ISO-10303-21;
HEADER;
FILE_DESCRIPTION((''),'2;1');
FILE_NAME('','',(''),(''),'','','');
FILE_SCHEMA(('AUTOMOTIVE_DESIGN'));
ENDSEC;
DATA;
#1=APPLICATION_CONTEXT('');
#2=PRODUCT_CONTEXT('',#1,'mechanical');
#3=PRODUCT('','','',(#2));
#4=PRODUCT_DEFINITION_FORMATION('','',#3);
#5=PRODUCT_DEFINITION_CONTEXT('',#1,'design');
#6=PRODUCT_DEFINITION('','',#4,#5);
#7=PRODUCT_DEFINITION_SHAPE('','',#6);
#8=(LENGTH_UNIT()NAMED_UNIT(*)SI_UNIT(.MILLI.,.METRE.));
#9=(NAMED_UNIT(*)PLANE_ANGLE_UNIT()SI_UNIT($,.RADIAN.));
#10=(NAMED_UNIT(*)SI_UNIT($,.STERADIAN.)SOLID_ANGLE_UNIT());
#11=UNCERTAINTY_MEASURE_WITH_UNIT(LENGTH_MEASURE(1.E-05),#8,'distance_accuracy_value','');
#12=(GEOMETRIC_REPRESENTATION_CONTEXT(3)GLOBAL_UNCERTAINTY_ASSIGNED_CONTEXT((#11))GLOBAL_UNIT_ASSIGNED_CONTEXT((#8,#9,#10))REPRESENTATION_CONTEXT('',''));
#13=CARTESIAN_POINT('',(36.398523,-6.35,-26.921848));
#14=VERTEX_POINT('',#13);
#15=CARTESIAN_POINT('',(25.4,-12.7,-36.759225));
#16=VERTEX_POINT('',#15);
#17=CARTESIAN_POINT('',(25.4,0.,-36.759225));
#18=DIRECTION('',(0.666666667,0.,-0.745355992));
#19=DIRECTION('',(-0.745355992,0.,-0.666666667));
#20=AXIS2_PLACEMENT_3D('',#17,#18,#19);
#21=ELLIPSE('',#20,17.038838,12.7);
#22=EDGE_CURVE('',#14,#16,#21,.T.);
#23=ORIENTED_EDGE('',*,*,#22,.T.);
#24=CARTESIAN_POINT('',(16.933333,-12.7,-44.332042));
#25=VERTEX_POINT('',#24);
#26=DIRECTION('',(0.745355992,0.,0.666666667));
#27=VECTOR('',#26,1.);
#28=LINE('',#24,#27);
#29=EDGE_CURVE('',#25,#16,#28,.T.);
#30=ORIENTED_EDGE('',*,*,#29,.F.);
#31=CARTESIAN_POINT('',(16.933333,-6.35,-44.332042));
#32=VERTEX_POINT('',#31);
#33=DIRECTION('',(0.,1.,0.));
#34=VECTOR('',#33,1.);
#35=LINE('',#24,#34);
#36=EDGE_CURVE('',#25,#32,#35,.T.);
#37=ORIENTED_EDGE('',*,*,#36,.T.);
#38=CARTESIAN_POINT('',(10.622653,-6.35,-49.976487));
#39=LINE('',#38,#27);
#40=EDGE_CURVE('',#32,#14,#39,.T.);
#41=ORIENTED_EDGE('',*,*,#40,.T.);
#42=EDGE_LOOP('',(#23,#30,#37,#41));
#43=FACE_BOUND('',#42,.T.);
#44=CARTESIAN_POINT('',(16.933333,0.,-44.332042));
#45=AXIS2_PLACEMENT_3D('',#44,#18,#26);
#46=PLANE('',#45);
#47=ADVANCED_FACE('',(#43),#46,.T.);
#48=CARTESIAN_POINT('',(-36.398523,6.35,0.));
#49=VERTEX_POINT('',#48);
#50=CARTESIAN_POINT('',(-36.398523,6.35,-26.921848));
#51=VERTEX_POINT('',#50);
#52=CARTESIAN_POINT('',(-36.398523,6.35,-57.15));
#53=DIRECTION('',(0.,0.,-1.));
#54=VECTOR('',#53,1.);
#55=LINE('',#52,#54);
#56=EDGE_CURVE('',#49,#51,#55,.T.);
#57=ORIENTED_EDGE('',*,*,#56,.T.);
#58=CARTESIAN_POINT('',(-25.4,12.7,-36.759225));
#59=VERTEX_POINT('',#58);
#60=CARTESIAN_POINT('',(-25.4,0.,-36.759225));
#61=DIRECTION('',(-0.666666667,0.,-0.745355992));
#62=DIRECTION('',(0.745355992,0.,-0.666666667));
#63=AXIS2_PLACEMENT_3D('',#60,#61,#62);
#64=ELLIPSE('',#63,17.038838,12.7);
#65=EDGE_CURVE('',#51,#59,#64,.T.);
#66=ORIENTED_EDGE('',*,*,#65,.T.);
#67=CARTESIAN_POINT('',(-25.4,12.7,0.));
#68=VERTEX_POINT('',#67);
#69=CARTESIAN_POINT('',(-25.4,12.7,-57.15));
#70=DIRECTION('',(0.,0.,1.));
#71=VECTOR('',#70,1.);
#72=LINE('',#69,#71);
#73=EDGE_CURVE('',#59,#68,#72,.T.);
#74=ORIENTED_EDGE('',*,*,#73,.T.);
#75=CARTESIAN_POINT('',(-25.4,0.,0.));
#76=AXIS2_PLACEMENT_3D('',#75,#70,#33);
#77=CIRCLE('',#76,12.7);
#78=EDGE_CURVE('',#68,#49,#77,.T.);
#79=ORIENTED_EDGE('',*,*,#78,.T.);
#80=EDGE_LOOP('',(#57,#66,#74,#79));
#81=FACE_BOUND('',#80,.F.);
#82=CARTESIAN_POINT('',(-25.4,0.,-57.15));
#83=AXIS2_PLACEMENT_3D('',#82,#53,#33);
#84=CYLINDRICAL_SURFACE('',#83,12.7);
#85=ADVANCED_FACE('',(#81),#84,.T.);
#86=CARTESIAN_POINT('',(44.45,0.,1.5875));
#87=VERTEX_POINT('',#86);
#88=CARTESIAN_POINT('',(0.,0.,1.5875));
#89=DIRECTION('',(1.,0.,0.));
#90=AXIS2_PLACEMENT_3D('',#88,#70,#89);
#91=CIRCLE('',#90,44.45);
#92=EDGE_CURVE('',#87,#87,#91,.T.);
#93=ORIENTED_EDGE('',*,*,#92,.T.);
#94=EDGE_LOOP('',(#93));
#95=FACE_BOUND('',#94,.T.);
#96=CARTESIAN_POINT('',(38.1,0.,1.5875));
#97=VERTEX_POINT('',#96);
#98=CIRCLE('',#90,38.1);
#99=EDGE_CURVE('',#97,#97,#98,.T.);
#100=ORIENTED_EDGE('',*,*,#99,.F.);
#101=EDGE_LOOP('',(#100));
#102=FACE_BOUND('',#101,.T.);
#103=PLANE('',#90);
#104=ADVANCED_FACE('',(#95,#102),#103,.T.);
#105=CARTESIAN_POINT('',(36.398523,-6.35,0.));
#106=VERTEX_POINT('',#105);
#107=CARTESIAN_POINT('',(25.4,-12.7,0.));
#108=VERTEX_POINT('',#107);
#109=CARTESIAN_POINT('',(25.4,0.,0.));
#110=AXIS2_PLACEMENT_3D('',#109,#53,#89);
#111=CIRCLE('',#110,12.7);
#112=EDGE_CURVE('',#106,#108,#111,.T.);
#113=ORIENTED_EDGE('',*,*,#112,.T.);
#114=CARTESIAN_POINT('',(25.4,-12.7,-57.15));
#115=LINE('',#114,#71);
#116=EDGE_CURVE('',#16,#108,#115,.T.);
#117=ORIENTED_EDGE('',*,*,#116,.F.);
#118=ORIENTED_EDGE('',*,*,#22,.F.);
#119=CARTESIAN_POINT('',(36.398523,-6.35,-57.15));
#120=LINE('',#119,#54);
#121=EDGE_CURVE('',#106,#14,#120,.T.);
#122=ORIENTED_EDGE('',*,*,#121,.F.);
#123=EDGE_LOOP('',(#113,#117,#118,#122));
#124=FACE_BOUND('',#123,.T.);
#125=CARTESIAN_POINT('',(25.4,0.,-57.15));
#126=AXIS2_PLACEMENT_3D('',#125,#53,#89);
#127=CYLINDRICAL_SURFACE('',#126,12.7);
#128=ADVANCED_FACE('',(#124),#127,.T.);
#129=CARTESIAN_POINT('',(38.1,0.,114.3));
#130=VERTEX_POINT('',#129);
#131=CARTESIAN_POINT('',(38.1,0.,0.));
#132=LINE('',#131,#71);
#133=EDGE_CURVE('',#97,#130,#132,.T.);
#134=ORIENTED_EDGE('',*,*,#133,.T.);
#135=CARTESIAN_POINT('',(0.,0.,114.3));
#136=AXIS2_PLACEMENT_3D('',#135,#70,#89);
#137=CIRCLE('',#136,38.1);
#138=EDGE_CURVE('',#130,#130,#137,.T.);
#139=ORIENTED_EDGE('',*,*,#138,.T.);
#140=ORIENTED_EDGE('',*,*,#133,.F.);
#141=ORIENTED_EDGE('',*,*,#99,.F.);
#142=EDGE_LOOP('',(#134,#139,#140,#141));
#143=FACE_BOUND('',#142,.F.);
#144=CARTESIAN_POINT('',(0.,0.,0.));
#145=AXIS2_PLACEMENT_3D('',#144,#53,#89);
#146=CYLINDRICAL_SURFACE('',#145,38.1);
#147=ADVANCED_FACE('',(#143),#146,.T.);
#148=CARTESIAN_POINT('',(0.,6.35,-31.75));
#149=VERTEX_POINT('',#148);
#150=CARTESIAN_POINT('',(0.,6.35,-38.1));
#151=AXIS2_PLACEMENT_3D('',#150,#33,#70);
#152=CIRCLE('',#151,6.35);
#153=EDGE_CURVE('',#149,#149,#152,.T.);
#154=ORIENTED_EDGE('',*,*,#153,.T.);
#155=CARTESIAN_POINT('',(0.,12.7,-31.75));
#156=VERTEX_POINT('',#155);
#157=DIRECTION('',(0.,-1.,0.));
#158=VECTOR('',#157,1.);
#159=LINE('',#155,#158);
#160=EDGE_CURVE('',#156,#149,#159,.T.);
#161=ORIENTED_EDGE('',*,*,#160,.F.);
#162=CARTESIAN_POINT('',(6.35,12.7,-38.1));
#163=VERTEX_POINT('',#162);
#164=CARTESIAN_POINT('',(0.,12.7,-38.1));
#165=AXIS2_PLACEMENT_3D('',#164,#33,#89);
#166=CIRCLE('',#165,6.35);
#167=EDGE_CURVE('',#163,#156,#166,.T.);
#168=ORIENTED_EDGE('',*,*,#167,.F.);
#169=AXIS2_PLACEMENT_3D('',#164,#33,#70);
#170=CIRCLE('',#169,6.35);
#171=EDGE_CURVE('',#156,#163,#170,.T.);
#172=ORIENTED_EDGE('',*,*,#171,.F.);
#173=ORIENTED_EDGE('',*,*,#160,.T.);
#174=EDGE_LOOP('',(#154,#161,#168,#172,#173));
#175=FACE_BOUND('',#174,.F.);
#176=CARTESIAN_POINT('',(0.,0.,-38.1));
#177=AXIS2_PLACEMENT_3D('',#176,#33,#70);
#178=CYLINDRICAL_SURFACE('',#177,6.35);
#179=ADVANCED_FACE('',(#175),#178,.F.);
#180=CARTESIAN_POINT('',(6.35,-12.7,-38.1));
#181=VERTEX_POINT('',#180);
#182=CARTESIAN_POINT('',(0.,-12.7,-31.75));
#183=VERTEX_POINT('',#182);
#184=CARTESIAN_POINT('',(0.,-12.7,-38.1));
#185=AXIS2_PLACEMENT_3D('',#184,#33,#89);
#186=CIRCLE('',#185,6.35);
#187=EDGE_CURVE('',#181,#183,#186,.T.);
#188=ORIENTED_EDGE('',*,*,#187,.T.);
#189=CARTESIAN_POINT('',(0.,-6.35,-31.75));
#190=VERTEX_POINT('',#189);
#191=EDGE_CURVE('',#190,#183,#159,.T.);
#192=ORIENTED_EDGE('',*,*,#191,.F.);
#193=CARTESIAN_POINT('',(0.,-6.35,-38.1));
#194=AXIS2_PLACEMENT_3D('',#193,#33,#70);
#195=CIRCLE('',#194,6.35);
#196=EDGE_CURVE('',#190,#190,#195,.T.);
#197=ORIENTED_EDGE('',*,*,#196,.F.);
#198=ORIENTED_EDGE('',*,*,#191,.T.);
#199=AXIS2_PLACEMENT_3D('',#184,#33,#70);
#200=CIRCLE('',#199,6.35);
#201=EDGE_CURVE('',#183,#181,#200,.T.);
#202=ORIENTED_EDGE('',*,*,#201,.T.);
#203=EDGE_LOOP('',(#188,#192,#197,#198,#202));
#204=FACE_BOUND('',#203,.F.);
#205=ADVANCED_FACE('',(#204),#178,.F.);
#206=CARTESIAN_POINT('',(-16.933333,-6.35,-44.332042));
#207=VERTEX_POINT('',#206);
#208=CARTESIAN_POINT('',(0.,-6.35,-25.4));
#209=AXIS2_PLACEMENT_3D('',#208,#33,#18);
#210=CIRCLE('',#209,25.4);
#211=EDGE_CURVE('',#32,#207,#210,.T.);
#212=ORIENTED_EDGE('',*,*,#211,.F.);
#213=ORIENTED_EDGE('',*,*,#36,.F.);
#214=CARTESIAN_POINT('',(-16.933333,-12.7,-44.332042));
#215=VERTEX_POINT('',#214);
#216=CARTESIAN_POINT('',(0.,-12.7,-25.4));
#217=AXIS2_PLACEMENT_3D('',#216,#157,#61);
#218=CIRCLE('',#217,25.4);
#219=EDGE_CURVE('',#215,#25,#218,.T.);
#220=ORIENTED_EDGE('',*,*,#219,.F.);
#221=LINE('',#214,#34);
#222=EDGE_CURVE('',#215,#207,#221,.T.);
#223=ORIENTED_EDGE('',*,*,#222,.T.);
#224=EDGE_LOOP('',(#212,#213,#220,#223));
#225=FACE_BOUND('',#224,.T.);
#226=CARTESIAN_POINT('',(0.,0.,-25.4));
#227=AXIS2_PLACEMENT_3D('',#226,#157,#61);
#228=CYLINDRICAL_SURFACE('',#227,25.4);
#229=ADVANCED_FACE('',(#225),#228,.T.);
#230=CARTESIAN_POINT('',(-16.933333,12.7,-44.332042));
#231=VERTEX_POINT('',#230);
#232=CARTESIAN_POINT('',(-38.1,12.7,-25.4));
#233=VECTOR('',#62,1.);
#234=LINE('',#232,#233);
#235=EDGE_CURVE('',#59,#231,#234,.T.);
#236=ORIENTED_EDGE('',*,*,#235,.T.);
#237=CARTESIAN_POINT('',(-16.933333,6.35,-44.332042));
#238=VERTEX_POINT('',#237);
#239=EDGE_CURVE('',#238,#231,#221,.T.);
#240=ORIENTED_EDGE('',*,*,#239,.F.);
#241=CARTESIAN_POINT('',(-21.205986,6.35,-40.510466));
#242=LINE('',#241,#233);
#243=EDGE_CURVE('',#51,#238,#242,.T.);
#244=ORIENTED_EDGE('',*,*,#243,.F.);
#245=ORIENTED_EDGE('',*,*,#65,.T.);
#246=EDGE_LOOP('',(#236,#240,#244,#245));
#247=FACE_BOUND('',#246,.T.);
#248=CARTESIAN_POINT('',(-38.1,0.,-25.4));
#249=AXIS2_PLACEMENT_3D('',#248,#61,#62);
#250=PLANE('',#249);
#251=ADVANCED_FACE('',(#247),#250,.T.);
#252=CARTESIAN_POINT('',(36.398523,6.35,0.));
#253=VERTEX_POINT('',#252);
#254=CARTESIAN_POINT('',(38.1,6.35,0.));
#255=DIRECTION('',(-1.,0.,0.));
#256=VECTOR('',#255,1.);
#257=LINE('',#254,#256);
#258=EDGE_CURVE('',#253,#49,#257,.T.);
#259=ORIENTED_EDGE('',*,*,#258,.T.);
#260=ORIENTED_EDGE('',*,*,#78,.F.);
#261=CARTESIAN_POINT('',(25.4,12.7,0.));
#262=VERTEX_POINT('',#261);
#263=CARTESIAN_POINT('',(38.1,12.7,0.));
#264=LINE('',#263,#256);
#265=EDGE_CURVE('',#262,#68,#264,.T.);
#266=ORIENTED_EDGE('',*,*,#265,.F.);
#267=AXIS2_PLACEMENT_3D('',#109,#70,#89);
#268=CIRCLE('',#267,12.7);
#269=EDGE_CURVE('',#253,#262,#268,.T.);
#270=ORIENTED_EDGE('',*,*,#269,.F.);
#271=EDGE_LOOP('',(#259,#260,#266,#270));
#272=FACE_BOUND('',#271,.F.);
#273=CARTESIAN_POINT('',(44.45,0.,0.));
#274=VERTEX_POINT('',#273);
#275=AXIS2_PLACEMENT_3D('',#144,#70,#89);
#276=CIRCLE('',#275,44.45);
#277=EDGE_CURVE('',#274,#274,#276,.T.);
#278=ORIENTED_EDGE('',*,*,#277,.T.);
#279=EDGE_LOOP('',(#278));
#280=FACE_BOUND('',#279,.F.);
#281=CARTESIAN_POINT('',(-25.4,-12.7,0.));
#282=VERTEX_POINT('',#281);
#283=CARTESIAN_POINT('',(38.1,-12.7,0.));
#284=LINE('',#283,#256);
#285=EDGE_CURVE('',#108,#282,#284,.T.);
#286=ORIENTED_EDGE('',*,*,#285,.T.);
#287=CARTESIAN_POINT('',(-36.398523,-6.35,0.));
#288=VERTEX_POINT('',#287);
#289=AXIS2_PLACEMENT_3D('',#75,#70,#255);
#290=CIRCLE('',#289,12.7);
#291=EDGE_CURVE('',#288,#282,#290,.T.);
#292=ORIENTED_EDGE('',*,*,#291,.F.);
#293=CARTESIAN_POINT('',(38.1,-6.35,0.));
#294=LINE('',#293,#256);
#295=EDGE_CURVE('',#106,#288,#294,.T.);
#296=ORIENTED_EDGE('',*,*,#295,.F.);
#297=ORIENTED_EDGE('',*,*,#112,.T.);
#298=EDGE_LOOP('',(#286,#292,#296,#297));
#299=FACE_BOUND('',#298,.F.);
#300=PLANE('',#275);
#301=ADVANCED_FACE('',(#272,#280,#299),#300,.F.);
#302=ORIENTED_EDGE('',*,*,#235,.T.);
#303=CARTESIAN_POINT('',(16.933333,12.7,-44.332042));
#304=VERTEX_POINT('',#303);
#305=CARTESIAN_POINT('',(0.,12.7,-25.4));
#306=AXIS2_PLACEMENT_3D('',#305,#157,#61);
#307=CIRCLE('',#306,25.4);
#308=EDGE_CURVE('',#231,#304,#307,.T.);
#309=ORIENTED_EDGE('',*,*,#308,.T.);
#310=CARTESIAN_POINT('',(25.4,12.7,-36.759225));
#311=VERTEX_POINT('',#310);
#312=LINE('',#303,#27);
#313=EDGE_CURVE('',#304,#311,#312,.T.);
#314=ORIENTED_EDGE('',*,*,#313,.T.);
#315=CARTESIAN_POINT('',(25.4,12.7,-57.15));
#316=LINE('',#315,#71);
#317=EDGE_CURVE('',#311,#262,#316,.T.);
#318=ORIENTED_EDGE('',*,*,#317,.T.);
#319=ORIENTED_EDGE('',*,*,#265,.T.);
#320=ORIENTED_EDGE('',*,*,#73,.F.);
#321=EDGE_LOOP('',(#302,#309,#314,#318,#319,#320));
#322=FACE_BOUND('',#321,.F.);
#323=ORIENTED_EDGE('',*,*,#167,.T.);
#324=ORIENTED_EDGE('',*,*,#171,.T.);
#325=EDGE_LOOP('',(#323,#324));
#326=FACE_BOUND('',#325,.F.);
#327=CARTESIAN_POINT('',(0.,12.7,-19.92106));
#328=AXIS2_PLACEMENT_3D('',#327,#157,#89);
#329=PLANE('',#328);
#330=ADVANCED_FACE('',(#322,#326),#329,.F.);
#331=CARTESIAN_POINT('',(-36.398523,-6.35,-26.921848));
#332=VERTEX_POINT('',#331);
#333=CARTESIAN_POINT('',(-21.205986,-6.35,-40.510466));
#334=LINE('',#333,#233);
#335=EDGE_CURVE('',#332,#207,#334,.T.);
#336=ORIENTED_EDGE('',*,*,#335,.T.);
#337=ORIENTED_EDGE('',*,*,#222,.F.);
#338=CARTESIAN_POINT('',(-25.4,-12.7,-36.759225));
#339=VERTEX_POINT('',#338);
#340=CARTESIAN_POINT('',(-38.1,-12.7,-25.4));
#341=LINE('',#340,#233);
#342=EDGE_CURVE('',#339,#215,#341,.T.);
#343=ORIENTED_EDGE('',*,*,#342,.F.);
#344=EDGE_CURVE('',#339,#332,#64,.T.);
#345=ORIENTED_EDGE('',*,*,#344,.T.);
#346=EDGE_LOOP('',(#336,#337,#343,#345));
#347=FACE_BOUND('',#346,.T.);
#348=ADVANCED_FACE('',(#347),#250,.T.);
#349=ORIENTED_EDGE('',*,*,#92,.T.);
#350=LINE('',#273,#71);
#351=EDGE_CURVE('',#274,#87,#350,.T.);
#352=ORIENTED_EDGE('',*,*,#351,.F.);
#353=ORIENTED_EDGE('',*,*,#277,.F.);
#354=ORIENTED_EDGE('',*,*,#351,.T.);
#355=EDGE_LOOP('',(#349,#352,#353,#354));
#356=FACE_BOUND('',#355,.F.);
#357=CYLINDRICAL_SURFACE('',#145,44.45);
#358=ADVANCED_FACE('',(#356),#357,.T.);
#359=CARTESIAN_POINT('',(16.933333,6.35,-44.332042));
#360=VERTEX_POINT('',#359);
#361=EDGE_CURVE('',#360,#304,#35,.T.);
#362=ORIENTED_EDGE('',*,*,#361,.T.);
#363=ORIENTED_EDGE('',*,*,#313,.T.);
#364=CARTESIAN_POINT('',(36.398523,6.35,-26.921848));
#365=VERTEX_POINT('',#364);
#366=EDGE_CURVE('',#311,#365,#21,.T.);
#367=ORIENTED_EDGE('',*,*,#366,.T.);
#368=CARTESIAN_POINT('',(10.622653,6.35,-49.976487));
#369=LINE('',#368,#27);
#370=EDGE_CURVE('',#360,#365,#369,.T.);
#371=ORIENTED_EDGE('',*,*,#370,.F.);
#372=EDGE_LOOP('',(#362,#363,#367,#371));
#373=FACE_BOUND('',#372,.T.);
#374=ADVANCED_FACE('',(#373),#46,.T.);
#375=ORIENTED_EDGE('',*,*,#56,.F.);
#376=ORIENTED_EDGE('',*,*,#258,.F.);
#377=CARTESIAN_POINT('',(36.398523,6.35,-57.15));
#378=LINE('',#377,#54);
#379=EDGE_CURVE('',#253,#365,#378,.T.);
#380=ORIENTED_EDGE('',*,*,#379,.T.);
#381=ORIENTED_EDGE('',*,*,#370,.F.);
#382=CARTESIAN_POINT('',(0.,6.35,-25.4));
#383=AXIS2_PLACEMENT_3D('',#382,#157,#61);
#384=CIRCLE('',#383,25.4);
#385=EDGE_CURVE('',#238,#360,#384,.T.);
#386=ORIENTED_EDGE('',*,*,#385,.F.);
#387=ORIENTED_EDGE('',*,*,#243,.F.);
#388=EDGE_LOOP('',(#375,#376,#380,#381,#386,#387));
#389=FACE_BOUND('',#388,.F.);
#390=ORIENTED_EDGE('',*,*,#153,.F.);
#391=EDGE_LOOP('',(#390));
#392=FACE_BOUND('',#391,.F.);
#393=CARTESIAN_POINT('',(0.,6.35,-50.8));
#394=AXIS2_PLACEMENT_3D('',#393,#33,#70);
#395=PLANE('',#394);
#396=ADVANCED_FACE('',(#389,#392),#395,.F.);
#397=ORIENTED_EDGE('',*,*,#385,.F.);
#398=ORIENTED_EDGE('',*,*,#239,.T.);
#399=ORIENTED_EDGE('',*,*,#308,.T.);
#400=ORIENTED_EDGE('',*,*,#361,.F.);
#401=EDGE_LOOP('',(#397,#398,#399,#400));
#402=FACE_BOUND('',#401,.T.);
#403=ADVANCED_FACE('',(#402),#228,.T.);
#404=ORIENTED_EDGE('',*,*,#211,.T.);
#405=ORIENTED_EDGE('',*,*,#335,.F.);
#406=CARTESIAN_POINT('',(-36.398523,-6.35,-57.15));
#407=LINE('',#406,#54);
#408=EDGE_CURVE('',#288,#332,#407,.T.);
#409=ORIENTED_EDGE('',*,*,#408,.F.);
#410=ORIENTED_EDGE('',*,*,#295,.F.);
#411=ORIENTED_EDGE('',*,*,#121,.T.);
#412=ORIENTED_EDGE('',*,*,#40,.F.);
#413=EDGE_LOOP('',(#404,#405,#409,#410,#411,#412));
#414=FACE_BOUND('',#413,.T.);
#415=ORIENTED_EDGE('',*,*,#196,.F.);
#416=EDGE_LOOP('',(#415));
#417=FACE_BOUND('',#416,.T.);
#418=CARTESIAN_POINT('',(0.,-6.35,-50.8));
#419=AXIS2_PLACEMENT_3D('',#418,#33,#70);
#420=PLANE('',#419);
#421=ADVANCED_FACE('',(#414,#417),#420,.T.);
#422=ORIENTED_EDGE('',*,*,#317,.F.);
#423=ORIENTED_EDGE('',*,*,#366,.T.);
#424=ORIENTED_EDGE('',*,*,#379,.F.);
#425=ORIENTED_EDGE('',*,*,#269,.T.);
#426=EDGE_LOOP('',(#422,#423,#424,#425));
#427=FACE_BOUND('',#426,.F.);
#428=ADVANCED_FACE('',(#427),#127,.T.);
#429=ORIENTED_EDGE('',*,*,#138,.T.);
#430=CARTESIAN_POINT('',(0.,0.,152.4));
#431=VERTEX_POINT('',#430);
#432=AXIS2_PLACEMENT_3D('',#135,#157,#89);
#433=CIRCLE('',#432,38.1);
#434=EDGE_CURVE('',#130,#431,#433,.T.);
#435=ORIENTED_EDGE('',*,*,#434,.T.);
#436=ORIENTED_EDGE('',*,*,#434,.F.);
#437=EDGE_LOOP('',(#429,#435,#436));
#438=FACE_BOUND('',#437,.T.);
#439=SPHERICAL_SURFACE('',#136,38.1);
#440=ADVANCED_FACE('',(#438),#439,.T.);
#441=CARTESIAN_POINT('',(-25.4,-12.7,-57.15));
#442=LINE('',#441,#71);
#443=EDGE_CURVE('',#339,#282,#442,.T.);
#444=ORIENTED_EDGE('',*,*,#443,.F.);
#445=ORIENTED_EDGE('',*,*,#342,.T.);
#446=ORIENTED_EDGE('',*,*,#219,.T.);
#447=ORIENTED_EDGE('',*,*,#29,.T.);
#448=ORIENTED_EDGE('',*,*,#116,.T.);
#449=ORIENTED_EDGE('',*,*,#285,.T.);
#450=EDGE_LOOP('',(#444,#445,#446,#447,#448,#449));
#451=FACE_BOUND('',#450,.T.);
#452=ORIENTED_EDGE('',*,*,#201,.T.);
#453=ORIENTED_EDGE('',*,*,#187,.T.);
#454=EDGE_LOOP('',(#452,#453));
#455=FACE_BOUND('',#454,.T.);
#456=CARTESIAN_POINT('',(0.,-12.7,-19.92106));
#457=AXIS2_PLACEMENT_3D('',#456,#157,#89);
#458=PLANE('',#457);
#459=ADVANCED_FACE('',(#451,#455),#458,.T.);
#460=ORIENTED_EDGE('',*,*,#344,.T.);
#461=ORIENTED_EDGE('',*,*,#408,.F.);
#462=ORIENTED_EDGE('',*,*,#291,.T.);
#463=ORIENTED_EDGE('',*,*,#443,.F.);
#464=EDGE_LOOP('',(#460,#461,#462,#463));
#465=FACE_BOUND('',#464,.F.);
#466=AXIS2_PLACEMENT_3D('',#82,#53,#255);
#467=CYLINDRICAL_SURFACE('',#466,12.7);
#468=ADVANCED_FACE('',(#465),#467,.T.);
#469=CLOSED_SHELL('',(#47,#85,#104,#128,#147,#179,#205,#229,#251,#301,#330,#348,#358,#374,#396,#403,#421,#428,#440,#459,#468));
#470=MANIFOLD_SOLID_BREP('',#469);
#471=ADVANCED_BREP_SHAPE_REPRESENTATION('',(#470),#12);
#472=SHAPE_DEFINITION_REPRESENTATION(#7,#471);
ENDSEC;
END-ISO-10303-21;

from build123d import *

# Parameters (mm, degrees)
F0_R        = 38.1
F1_DEPTH    = 152.4
F2_R        = 38.1
F4_DEPTH    = 12.7
F5_T1_DEPTH = 57.15
F6_W        = 12.7
F6_H        = 50.8
F7_DEPTH    = 38.1
F0_R_2      = 44.45
F8_DEPTH    = 1.5875


# Not quite as in the source:
# - a fillet or chamfer that OpenCascade refuses, or shapes differently, is made with other operations: its cross-section is extruded or revolved along the edge and cut away or added


with BuildPart() as f1:
    # F0 (on Top) → F1 (new body)
    with BuildSketch(Plane.XY):
        Circle(F0_R)
    extrude(amount=F1_DEPTH)

    # F2
    f2_edges = [f1.edges().sort_by_distance(p)[0] for p in [
        (-38.1, 0, 152.4),
    ]]
    fillet(f2_edges, radius=F2_R)

    # F3 (on Front) → F4 (join, symmetric)
    with BuildSketch(Plane.XZ):
        with BuildLine():
            Line((16.9333333333, -44.3320422095), (38.1, -25.4))
            Line((38.1, -25.4), (38.1, 0))
            Line((38.1, 0), (0, 0))
            Line((0, 0), (-38.1, 0))
            Line((-38.1, 0), (-38.1, -25.4))
            Line((-38.1, -25.4), (-16.9333333333, -44.3320422095))
            ThreePointArc((-16.9333333333, -44.3320422095), (0, -50.8), (16.9333333333, -44.3320422095))
        make_face()
        with BuildLine():
            ThreePointArc((6.35, -38.1), (-4.4901280605, -42.5901280605), (0, -31.75))
            ThreePointArc((0, -31.75), (4.4901280605, -33.6098719395), (6.35, -38.1))
        make_face(mode=Mode.SUBTRACT)
    extrude(amount=F4_DEPTH, both=True)

    # F5: fillet of radius 12.7 on 4 edges, made by hand

    # F5_s2 → F5_t1 (cut)
    with BuildSketch(Plane.XY.offset(-57.15)):
        with BuildLine():
            ThreePointArc((38.1, 0), (34.3802561211, -8.9802561211), (25.4, -12.7))
            Line((25.4, -12.7), (38.1, -12.7))
            Line((38.1, -12.7), (38.1, 0))
        make_face()
        with BuildLine():
            ThreePointArc((38.1, 0), (34.3802561211, 8.9802561211), (25.4, 12.7))
            Line((25.4, 12.7), (38.1, 12.7))
            Line((38.1, 12.7), (38.1, 0))
        make_face()
        with BuildLine():
            ThreePointArc((-25.4, 12.7), (-34.3802561211, 8.9802561211), (-38.1, 0))
            Line((-38.1, 0), (-38.1, 12.7))
            Line((-38.1, 12.7), (-25.4, 12.7))
        make_face()
        with BuildLine():
            ThreePointArc((-38.1, 0), (-34.3802561211, -8.9802561211), (-25.4, -12.7))
            Line((-25.4, -12.7), (-38.1, -12.7))
            Line((-38.1, -12.7), (-38.1, 0))
        make_face()
    extrude(amount=F5_T1_DEPTH, mode=Mode.SUBTRACT)

    # F6 (on Right) → F7 (cut, symmetric)
    with BuildSketch(Plane.YZ):
        with Locations((0, -25.4)):
            Rectangle(F6_W, F6_H)
    extrude(amount=F7_DEPTH, both=True, mode=Mode.SUBTRACT)

    # F0 (on Top) → F8 (join)
    with BuildSketch(Plane.XY):
        Circle(F0_R_2)
        Circle(F0_R, mode=Mode.SUBTRACT)
    extrude(amount=F8_DEPTH)


solid = f1.part
